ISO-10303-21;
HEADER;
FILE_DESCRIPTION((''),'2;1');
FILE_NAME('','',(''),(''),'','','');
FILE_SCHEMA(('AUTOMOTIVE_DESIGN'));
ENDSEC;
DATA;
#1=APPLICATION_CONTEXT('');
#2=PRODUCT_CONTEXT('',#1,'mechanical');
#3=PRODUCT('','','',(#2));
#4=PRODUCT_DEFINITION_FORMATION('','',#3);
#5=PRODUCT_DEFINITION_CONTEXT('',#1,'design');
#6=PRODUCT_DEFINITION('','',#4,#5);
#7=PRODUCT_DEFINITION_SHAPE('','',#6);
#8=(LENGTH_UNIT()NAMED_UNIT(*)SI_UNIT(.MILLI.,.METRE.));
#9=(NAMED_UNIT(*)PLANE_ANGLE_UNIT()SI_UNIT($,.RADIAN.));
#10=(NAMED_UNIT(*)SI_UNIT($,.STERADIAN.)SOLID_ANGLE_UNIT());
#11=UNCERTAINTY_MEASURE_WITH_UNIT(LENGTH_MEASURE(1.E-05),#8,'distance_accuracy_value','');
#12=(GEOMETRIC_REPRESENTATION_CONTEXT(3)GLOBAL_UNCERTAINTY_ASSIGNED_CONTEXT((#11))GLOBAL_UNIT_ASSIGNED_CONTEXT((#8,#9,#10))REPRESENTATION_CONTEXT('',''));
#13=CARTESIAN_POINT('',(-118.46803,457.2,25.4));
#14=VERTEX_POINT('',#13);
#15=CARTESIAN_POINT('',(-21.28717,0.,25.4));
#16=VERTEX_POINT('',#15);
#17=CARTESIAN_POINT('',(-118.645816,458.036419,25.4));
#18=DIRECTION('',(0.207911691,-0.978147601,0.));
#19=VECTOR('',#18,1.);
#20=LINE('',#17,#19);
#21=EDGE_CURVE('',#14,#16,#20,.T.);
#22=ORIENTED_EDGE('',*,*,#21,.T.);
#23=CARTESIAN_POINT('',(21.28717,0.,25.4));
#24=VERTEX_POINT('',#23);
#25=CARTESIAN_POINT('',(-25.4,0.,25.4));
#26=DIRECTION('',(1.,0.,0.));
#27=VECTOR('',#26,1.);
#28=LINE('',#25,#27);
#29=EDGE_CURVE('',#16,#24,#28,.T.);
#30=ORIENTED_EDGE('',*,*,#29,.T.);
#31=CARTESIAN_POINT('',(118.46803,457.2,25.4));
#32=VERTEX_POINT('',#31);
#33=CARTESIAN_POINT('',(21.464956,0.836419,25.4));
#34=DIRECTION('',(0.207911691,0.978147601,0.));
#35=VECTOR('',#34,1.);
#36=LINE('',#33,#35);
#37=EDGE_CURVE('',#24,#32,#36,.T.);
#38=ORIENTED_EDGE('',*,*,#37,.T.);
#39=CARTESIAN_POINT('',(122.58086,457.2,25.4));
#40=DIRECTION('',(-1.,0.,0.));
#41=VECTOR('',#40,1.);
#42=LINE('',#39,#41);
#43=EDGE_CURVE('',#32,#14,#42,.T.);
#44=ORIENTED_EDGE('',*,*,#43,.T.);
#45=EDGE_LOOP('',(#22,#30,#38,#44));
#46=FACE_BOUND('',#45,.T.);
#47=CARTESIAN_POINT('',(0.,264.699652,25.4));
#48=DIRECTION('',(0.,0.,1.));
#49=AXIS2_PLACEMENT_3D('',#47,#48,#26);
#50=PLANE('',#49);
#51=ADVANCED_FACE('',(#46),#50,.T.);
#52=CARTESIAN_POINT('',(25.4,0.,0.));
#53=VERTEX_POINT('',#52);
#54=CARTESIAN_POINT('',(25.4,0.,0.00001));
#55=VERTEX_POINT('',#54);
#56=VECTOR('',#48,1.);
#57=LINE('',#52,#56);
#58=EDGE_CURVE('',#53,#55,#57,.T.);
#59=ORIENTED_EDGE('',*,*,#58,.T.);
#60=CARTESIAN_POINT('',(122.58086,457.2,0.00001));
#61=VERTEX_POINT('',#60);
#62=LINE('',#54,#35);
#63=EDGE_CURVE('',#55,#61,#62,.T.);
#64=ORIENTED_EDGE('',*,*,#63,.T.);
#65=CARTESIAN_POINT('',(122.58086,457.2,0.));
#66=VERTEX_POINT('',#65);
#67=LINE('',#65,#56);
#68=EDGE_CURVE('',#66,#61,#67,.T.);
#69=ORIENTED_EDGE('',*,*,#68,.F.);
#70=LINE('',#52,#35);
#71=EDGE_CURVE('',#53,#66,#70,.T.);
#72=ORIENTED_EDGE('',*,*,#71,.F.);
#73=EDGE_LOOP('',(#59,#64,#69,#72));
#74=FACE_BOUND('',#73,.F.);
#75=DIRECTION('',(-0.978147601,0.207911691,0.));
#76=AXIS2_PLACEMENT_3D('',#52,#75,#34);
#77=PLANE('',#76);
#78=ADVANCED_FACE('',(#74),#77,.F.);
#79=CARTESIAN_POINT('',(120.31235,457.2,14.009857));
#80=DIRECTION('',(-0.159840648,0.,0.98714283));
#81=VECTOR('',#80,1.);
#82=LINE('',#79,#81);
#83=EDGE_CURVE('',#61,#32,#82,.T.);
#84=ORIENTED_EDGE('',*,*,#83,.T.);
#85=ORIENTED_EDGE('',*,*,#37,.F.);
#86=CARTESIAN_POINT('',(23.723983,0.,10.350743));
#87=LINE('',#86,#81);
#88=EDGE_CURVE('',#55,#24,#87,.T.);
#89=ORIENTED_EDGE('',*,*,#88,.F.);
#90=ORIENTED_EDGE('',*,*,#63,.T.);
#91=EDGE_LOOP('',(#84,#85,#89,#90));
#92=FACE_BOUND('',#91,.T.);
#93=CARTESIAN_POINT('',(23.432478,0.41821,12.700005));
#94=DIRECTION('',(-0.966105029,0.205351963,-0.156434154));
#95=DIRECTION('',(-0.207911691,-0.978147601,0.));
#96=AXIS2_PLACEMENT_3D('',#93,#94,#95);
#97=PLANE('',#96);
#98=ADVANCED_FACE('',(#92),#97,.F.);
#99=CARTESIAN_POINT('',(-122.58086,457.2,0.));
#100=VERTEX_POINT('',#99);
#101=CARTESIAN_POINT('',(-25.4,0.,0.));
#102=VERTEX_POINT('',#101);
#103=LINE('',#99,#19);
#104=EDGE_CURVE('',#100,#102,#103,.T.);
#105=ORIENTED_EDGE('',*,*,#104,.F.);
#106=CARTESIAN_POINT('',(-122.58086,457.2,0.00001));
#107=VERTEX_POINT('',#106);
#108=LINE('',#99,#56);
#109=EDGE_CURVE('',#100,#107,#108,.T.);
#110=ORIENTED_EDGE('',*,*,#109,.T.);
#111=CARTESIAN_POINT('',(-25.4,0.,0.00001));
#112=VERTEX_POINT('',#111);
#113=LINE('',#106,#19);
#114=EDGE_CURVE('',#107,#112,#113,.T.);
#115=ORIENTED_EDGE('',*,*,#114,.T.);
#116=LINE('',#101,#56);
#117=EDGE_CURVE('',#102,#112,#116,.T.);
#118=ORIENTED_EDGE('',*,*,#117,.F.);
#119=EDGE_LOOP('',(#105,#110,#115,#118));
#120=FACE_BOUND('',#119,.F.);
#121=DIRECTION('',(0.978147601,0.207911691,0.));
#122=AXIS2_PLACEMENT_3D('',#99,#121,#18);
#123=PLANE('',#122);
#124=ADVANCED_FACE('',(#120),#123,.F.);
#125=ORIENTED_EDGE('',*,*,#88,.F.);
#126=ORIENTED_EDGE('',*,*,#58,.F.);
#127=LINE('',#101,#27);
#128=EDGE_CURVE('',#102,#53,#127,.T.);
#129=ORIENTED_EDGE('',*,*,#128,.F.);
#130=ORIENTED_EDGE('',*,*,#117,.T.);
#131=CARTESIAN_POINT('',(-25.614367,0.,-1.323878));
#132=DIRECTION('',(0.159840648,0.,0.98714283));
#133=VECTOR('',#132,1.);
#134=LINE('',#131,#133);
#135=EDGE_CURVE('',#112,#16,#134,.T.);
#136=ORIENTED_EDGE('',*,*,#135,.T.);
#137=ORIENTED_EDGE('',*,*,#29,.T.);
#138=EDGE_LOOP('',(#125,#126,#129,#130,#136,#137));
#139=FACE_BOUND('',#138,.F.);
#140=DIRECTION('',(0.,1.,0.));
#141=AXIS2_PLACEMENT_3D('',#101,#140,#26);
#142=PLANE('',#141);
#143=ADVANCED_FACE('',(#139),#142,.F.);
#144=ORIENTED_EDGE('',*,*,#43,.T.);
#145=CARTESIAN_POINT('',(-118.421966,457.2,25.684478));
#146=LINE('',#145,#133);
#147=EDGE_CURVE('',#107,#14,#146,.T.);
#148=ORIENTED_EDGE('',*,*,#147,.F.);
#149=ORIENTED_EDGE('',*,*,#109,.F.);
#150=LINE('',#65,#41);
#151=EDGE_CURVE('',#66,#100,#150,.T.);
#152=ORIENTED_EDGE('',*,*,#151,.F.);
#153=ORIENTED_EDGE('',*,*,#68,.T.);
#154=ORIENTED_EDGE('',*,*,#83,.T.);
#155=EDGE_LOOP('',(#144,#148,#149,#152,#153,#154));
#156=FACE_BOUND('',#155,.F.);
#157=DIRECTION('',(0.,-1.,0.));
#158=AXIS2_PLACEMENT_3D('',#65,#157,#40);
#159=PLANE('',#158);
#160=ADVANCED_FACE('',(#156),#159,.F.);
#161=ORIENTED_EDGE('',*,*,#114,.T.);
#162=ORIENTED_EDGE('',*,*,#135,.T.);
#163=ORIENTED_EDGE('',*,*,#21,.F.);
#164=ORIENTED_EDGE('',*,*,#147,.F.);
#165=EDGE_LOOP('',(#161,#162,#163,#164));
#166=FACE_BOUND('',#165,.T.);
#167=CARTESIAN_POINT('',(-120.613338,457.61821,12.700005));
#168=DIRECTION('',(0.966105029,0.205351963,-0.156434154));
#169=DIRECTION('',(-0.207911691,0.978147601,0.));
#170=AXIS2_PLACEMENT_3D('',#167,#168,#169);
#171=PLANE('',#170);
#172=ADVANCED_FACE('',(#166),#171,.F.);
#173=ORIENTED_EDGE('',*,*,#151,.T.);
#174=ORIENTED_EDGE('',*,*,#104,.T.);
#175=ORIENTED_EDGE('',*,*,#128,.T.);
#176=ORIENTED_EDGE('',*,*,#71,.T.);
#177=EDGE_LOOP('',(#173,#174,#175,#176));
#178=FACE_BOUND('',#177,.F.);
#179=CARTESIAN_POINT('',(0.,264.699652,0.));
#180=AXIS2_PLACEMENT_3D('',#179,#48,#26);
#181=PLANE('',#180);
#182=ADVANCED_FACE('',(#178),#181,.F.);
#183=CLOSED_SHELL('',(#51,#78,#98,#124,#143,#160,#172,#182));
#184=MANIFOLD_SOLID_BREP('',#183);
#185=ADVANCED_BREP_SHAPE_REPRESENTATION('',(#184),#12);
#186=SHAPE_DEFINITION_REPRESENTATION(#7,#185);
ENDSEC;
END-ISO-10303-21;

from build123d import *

# Parameters (mm, degrees)
F2_DEPTH   = 25.4
F3_SIZE2   = 4.022955
F3_SIZE    = 25.39999
F3_2_SIZE2 = 4.022955
F3_2_SIZE  = 25.39999


# Not quite as in the source:
# - a fillet or chamfer is up to 0.001 mm smaller than in the source, because OpenCascade refuses the exact size


with BuildPart() as f2:
    # F1 (on Top) → F2 (new body)
    with BuildSketch(Plane.XY):
        Polygon((-122.5808599955, 457.2), (-25.4, 0), (25.4, 0), (122.5808599955, 457.2), align=None)
    extrude(amount=F2_DEPTH)

    # F3 (size 25.4 and 4.0229647842 in the source; OpenCascade refuses exactly that, so slightly less here)
    f3_edges = [f2.edges().sort_by_distance(p)[0] for p in [
        (-73.99043, 228.6, 25.4),
    ]]
    f3_side = f2.faces().sort_by_distance((-73.99043, 228.6, 12.7))[0]
    chamfer(f3_edges, length=F3_SIZE, length2=F3_SIZE2, reference=f3_side)

    # F3#2 (size 25.4 and 4.0229647842 in the source; OpenCascade refuses exactly that, so slightly less here)
    f3_2_edges = [f2.edges().sort_by_distance(p)[0] for p in [
        (73.99043, 228.6, 25.4),
    ]]
    f3_2_side = f2.faces().sort_by_distance((73.99043, 228.6, 12.7))[0]
    chamfer(f3_2_edges, length=F3_2_SIZE, length2=F3_2_SIZE2, reference=f3_2_side)


solid = f2.part
